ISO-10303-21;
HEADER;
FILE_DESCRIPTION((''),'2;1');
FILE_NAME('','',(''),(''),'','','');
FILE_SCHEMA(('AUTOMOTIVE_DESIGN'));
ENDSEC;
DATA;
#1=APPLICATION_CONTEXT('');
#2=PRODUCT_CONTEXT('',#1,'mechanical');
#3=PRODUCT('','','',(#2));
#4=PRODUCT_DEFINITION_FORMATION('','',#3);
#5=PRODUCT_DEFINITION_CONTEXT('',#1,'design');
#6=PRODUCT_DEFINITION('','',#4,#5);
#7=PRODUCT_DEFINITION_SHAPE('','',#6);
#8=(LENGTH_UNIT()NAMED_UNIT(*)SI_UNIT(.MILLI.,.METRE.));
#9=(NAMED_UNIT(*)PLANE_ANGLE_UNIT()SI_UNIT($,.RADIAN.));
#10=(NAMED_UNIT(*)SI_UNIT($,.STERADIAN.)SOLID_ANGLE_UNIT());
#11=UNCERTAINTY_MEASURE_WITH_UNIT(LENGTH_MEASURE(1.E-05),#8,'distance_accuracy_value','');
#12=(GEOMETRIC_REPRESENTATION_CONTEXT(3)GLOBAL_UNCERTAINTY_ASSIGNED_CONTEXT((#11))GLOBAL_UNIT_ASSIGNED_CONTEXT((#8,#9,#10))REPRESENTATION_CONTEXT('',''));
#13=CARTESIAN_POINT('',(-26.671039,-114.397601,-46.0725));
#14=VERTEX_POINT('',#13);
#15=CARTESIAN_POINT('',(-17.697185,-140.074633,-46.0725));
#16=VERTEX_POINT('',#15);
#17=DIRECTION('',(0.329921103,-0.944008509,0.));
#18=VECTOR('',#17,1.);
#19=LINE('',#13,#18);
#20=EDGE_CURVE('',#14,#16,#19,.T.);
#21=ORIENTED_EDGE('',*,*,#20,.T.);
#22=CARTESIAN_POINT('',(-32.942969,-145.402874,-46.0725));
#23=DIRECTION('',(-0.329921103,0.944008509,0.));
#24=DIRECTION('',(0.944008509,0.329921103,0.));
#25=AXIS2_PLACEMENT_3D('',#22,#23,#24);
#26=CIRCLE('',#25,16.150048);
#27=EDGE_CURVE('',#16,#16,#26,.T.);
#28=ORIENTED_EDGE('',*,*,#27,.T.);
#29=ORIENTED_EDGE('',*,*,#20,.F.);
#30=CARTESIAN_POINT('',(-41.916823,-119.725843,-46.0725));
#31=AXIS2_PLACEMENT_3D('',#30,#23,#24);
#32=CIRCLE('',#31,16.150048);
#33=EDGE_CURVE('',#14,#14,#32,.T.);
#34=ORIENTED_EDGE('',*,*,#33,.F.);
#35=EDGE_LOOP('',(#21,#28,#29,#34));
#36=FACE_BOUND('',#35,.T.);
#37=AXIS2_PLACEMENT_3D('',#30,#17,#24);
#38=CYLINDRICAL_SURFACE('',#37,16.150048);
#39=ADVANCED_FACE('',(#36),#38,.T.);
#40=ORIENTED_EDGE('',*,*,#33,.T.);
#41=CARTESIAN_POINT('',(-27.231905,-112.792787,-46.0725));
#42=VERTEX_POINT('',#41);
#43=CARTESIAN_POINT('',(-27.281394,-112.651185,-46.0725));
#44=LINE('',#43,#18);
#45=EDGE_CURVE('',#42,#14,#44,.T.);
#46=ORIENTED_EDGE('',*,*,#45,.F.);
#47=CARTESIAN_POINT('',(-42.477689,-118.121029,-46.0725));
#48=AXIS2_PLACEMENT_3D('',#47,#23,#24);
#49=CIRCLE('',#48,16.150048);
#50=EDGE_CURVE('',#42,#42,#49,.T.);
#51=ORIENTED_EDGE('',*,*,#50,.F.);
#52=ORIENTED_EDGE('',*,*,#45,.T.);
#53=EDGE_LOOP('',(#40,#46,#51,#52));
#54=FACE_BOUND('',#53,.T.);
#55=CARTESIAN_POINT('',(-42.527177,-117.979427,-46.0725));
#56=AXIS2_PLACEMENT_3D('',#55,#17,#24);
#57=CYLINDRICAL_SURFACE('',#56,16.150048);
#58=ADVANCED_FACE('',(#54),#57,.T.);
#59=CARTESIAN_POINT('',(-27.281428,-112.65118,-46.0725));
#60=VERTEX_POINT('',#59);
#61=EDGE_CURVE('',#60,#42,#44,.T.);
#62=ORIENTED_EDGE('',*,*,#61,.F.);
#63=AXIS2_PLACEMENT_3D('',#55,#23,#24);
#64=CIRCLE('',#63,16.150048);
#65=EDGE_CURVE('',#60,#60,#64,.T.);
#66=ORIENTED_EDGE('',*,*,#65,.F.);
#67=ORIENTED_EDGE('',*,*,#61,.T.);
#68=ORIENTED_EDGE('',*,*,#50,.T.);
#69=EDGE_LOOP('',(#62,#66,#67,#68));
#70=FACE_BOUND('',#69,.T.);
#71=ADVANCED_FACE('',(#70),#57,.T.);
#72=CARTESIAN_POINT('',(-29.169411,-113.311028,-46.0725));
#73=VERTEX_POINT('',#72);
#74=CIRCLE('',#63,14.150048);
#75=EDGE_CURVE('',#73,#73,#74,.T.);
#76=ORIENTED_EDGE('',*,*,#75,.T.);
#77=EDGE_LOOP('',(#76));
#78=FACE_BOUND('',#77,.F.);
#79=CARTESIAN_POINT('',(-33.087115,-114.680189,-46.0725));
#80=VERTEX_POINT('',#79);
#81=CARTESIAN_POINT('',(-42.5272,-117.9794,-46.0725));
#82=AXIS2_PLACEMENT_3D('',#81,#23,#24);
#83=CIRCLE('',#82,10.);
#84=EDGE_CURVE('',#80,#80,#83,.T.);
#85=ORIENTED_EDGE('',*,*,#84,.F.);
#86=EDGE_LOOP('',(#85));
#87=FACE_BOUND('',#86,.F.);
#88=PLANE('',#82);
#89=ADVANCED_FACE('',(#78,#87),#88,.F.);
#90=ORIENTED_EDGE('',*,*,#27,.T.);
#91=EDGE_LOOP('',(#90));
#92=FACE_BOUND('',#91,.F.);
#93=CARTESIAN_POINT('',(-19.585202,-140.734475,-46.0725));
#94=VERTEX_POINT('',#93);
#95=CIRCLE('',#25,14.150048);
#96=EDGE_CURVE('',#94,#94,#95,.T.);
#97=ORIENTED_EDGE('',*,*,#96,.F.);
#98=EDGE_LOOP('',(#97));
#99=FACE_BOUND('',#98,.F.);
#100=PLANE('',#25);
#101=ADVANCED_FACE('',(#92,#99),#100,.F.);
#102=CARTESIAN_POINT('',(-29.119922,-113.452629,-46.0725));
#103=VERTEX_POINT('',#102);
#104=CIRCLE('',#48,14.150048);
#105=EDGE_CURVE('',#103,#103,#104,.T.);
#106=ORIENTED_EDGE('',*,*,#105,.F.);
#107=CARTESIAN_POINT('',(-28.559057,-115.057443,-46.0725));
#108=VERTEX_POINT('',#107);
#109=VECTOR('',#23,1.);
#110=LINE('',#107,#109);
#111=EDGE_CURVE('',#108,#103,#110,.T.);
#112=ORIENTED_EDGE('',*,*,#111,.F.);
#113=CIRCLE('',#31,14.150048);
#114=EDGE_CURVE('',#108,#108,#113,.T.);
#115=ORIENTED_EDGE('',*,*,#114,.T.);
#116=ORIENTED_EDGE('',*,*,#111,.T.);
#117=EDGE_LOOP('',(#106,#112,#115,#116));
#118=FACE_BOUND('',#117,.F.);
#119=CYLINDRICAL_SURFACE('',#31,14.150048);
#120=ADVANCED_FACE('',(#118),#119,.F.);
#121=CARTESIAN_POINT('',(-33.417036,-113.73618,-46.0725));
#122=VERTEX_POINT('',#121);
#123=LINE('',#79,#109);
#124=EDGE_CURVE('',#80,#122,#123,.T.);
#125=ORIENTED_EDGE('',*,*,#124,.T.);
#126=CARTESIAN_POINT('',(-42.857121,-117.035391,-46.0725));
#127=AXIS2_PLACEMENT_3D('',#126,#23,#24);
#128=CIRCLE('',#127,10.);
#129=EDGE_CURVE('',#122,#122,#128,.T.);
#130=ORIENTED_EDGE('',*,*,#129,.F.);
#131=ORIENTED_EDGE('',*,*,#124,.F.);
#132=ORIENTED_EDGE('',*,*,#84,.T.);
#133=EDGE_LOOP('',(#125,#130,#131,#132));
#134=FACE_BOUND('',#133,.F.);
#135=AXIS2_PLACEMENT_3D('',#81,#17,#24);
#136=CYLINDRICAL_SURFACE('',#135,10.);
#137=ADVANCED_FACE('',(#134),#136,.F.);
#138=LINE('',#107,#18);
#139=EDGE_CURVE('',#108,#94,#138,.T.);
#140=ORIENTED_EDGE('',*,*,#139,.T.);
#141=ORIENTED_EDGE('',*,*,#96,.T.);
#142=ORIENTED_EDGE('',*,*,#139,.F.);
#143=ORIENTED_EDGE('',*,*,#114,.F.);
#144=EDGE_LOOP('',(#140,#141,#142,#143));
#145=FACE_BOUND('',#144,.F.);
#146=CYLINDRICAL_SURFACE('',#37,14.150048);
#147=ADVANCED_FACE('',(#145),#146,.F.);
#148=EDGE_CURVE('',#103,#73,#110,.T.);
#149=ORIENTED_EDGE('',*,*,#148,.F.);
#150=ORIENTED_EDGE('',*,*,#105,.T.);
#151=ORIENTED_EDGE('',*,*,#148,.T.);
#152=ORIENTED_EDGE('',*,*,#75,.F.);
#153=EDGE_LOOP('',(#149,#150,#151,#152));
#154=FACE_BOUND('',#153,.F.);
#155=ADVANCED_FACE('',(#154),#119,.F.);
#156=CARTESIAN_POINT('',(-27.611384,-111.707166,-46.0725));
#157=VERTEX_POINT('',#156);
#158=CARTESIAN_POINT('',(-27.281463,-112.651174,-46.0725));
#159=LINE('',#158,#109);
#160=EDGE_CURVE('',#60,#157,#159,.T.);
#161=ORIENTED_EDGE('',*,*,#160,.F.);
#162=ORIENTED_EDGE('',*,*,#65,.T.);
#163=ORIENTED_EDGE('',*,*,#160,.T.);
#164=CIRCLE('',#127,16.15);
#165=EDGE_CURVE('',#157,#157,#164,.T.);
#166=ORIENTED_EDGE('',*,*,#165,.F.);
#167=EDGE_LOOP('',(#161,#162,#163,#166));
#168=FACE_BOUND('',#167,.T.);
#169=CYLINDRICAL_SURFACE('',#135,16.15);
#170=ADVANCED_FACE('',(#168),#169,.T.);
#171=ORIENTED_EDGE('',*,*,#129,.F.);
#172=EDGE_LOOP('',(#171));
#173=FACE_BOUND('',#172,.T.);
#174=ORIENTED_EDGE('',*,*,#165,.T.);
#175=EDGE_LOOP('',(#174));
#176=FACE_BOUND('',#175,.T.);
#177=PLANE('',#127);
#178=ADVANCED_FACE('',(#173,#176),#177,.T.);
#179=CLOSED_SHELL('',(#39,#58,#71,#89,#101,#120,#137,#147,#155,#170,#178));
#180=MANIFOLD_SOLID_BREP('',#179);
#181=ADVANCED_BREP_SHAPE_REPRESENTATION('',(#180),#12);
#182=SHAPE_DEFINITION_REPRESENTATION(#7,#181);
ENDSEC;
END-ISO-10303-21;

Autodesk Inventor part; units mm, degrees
ref_plane "YZ Plane" through (0, 0, 0) normal (1, 0, 0) x (0, 1, 0)
ref_plane "XZ Plane" through (0, 0, 0) normal (0, 1, 0) x (-1, 0, 0)
ref_plane "XY Plane" through (0, 0, 0) normal (0, 0, 1) x (1, 0, 0)
ref_plane "Work Plane2" through (-89.4914, 16.4002, -46.0725) normal (0, 0, 1) x (0.3299211, -0.9440085, 0)
sketch "Sketch3" plane through (-89.4914, 16.4002, -46.0725) normal (0, 0, 1) x (0.3299211, -0.9440085, 0)
  line L0 (142.5, 12.3) -> (142.5, -12.3) projected
  line L1 (142.35, 11.9681) -> (142.35, -12.4873)
  point P0 (45.0071, 79.0699)
  dimension "d3" = 0.15
sketch "Sketch2" plane through (-89.4914, 16.4002, -46.0725) normal (0, 0, 1) x (0.3299211, -0.9440085, 0)
  line L0 (144.2, -14) -> (171.4, -14)
  line L1 (142.5, -12.3) -> (142.5, 11.0344) projected
  line L2 (130, 22) -> (130, -22) projected
  line L3 (144.2, 16.15) -> (171.4, 16.15)
  line L4 (171.4, 16.15) -> (171.4, 14.15)
  line L5 (144.2, 14.15) -> (171.4, 14.15)
  line L6 (156.1685, 0) -> (84.745, 0) construction
  line L7 (144.2, 14.15) -> (142.35, 14.15)
  line L8 (142.35, 16.15) -> (144.2, 16.15)
  line L9 (142.35, 11.9681) -> (142.35, -12.4873) projected
  line L10 (142.5, 14.15) -> (142.35, 14.15)
  line L11 (142.35, 14.15) -> (142.35, 16.15)
  line L12 (142.35, 16.15) -> (142.5, 16.15)
  point P0 (45.0071, 79.0699)
  dimension "d7" = 2
revolve "Revolution1" add sketch "Sketch2" angle 360 about axis through (-37.9682, -131.0241, -46.0725) along (-0.3299211, 0.9440085, 0)
sketch "Sketch4" plane through (-42.5272, -117.9794, -46.0725) normal (-0.3299211, 0.9440085, 0) x (0.9440085, 0.3299211, 0)
  circle A0 centre (0, 0) radius 10
  circle A1 centre (0, 0) radius 16.15
  point P0 (79.0699, -46.0725)
  dimension "d4" = 20
extrude "Extrusion2" add sketch "Sketch4" along normal blind 1
properties part number "motor_handler"
